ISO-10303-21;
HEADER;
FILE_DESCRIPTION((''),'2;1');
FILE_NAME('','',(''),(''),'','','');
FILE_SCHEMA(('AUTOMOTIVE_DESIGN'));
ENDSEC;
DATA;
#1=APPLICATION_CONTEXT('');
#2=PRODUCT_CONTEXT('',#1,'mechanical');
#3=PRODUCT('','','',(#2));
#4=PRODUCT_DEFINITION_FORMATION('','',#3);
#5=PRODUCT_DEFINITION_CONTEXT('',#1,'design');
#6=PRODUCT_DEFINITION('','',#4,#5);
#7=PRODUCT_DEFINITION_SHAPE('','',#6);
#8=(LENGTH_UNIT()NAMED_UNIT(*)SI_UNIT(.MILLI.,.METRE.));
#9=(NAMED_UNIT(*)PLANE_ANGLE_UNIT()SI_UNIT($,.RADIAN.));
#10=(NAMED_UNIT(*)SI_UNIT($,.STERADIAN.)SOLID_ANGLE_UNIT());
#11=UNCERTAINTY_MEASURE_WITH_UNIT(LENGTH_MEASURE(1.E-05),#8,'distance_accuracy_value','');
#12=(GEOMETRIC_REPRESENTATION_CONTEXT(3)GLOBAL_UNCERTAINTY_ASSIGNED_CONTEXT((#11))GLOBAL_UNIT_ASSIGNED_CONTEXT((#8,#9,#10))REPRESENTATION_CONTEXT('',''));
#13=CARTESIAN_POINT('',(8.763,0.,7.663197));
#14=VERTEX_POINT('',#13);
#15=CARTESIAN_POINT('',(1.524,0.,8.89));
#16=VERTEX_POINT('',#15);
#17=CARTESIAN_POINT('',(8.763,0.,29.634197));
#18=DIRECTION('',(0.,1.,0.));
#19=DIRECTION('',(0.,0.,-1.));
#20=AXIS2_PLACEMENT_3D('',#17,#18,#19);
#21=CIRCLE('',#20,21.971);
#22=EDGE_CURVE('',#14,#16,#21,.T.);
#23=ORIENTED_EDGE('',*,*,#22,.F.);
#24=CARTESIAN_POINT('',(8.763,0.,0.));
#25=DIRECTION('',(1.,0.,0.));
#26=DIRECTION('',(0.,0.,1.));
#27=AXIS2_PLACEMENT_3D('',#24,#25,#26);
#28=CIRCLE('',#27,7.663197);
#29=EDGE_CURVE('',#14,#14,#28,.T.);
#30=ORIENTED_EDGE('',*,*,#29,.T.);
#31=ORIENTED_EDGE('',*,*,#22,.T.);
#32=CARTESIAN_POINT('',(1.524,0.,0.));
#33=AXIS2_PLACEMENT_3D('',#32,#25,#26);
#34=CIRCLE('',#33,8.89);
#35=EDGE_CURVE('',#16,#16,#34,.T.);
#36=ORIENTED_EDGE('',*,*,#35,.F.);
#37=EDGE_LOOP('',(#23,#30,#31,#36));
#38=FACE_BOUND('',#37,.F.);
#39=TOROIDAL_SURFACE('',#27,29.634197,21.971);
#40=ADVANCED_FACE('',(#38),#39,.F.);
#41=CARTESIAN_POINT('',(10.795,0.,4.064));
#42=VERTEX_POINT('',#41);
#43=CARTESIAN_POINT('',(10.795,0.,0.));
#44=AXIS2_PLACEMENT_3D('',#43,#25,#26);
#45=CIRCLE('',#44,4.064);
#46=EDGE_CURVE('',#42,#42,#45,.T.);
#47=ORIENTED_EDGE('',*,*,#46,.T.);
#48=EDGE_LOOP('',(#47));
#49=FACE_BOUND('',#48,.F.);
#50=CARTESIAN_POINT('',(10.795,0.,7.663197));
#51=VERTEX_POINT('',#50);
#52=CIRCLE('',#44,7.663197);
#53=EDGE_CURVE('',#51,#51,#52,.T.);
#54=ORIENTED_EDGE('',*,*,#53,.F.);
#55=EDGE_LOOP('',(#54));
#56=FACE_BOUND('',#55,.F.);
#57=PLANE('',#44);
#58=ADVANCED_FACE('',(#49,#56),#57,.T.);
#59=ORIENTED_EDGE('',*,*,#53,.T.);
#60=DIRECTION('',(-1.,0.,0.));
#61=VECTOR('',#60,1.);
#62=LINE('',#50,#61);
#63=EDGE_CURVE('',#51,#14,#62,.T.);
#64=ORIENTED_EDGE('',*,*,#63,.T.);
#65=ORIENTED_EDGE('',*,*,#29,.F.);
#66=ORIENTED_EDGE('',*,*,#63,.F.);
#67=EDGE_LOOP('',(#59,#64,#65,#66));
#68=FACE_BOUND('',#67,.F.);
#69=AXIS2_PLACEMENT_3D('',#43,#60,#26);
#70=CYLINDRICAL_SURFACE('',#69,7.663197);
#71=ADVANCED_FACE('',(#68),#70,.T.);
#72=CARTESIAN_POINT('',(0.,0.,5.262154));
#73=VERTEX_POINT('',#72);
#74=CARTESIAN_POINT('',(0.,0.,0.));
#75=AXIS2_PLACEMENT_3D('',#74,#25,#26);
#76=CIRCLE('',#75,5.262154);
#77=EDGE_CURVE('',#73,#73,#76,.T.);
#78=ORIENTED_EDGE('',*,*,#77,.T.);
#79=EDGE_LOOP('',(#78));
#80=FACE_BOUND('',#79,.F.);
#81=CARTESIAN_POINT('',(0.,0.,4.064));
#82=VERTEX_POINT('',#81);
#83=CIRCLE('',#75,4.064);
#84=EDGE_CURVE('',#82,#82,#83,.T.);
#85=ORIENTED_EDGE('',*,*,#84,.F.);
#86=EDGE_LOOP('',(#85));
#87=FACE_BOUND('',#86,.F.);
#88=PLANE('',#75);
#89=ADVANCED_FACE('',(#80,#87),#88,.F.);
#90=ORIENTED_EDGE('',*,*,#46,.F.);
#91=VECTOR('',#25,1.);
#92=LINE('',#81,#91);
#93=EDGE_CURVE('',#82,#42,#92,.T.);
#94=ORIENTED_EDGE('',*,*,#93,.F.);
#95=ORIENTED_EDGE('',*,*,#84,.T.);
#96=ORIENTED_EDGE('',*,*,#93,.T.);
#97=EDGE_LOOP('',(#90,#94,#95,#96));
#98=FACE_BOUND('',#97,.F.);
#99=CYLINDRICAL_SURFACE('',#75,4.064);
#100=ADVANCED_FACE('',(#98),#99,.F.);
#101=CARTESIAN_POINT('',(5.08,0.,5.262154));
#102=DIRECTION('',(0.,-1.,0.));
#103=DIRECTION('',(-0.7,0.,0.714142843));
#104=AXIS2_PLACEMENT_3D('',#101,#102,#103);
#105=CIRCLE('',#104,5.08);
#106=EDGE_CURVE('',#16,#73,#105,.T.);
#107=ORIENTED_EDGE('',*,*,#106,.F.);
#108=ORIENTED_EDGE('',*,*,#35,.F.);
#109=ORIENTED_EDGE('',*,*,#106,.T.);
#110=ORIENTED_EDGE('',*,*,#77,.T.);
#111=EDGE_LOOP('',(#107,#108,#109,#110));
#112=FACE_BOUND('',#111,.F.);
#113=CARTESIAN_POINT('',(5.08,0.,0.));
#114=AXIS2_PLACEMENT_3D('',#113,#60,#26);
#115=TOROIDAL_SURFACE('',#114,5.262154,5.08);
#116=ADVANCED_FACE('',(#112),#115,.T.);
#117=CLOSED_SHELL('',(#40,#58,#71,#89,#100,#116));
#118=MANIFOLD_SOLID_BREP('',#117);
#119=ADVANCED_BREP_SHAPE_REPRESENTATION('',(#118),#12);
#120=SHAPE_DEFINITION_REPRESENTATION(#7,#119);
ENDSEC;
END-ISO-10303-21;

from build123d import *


# Not quite as in the source:
# - a fillet or chamfer that OpenCascade refuses, or shapes differently, is made with other operations: its cross-section is extruded or revolved along the edge and cut away or added


with BuildPart() as f1:
    # F0 (on Front) → F1 (revolve)
    with BuildSketch(Plane.XZ):
        with BuildLine():
            Line((0, 8.89), (0, 4.064))
            Line((0, 4.064), (10.795, 4.064))
            Line((10.795, 4.064), (10.795, 7.6631972609))
            Line((10.795, 7.6631972609), (8.763, 7.6631972609))
            ThreePointArc((8.763, 7.6631972609), (5.0918909727, 7.9720690296), (1.524, 8.89))
            Line((1.524, 8.89), (0, 8.89))
        make_face()
    revolve(axis=Axis((10.4300994426, 0, 0), (1, 0, 0)))

    # F2: fillet of radius 5.08 on 1 edges, made by hand

    # F2_s1 → F2_t2 (revolve, cut)
    with BuildSketch(Plane.XZ):
        with BuildLine():
            ThreePointArc((1.524, 8.89), (0.3964714157, 7.2296298982), (0, 5.2621543583))
            Line((0, 5.2621543583), (0, 8.89))
            Line((0, 8.89), (1.524, 8.89))
        make_face()
    revolve(axis=Axis((0, 0, 0), (1, 0, 0)), mode=Mode.SUBTRACT)


solid = f1.part
